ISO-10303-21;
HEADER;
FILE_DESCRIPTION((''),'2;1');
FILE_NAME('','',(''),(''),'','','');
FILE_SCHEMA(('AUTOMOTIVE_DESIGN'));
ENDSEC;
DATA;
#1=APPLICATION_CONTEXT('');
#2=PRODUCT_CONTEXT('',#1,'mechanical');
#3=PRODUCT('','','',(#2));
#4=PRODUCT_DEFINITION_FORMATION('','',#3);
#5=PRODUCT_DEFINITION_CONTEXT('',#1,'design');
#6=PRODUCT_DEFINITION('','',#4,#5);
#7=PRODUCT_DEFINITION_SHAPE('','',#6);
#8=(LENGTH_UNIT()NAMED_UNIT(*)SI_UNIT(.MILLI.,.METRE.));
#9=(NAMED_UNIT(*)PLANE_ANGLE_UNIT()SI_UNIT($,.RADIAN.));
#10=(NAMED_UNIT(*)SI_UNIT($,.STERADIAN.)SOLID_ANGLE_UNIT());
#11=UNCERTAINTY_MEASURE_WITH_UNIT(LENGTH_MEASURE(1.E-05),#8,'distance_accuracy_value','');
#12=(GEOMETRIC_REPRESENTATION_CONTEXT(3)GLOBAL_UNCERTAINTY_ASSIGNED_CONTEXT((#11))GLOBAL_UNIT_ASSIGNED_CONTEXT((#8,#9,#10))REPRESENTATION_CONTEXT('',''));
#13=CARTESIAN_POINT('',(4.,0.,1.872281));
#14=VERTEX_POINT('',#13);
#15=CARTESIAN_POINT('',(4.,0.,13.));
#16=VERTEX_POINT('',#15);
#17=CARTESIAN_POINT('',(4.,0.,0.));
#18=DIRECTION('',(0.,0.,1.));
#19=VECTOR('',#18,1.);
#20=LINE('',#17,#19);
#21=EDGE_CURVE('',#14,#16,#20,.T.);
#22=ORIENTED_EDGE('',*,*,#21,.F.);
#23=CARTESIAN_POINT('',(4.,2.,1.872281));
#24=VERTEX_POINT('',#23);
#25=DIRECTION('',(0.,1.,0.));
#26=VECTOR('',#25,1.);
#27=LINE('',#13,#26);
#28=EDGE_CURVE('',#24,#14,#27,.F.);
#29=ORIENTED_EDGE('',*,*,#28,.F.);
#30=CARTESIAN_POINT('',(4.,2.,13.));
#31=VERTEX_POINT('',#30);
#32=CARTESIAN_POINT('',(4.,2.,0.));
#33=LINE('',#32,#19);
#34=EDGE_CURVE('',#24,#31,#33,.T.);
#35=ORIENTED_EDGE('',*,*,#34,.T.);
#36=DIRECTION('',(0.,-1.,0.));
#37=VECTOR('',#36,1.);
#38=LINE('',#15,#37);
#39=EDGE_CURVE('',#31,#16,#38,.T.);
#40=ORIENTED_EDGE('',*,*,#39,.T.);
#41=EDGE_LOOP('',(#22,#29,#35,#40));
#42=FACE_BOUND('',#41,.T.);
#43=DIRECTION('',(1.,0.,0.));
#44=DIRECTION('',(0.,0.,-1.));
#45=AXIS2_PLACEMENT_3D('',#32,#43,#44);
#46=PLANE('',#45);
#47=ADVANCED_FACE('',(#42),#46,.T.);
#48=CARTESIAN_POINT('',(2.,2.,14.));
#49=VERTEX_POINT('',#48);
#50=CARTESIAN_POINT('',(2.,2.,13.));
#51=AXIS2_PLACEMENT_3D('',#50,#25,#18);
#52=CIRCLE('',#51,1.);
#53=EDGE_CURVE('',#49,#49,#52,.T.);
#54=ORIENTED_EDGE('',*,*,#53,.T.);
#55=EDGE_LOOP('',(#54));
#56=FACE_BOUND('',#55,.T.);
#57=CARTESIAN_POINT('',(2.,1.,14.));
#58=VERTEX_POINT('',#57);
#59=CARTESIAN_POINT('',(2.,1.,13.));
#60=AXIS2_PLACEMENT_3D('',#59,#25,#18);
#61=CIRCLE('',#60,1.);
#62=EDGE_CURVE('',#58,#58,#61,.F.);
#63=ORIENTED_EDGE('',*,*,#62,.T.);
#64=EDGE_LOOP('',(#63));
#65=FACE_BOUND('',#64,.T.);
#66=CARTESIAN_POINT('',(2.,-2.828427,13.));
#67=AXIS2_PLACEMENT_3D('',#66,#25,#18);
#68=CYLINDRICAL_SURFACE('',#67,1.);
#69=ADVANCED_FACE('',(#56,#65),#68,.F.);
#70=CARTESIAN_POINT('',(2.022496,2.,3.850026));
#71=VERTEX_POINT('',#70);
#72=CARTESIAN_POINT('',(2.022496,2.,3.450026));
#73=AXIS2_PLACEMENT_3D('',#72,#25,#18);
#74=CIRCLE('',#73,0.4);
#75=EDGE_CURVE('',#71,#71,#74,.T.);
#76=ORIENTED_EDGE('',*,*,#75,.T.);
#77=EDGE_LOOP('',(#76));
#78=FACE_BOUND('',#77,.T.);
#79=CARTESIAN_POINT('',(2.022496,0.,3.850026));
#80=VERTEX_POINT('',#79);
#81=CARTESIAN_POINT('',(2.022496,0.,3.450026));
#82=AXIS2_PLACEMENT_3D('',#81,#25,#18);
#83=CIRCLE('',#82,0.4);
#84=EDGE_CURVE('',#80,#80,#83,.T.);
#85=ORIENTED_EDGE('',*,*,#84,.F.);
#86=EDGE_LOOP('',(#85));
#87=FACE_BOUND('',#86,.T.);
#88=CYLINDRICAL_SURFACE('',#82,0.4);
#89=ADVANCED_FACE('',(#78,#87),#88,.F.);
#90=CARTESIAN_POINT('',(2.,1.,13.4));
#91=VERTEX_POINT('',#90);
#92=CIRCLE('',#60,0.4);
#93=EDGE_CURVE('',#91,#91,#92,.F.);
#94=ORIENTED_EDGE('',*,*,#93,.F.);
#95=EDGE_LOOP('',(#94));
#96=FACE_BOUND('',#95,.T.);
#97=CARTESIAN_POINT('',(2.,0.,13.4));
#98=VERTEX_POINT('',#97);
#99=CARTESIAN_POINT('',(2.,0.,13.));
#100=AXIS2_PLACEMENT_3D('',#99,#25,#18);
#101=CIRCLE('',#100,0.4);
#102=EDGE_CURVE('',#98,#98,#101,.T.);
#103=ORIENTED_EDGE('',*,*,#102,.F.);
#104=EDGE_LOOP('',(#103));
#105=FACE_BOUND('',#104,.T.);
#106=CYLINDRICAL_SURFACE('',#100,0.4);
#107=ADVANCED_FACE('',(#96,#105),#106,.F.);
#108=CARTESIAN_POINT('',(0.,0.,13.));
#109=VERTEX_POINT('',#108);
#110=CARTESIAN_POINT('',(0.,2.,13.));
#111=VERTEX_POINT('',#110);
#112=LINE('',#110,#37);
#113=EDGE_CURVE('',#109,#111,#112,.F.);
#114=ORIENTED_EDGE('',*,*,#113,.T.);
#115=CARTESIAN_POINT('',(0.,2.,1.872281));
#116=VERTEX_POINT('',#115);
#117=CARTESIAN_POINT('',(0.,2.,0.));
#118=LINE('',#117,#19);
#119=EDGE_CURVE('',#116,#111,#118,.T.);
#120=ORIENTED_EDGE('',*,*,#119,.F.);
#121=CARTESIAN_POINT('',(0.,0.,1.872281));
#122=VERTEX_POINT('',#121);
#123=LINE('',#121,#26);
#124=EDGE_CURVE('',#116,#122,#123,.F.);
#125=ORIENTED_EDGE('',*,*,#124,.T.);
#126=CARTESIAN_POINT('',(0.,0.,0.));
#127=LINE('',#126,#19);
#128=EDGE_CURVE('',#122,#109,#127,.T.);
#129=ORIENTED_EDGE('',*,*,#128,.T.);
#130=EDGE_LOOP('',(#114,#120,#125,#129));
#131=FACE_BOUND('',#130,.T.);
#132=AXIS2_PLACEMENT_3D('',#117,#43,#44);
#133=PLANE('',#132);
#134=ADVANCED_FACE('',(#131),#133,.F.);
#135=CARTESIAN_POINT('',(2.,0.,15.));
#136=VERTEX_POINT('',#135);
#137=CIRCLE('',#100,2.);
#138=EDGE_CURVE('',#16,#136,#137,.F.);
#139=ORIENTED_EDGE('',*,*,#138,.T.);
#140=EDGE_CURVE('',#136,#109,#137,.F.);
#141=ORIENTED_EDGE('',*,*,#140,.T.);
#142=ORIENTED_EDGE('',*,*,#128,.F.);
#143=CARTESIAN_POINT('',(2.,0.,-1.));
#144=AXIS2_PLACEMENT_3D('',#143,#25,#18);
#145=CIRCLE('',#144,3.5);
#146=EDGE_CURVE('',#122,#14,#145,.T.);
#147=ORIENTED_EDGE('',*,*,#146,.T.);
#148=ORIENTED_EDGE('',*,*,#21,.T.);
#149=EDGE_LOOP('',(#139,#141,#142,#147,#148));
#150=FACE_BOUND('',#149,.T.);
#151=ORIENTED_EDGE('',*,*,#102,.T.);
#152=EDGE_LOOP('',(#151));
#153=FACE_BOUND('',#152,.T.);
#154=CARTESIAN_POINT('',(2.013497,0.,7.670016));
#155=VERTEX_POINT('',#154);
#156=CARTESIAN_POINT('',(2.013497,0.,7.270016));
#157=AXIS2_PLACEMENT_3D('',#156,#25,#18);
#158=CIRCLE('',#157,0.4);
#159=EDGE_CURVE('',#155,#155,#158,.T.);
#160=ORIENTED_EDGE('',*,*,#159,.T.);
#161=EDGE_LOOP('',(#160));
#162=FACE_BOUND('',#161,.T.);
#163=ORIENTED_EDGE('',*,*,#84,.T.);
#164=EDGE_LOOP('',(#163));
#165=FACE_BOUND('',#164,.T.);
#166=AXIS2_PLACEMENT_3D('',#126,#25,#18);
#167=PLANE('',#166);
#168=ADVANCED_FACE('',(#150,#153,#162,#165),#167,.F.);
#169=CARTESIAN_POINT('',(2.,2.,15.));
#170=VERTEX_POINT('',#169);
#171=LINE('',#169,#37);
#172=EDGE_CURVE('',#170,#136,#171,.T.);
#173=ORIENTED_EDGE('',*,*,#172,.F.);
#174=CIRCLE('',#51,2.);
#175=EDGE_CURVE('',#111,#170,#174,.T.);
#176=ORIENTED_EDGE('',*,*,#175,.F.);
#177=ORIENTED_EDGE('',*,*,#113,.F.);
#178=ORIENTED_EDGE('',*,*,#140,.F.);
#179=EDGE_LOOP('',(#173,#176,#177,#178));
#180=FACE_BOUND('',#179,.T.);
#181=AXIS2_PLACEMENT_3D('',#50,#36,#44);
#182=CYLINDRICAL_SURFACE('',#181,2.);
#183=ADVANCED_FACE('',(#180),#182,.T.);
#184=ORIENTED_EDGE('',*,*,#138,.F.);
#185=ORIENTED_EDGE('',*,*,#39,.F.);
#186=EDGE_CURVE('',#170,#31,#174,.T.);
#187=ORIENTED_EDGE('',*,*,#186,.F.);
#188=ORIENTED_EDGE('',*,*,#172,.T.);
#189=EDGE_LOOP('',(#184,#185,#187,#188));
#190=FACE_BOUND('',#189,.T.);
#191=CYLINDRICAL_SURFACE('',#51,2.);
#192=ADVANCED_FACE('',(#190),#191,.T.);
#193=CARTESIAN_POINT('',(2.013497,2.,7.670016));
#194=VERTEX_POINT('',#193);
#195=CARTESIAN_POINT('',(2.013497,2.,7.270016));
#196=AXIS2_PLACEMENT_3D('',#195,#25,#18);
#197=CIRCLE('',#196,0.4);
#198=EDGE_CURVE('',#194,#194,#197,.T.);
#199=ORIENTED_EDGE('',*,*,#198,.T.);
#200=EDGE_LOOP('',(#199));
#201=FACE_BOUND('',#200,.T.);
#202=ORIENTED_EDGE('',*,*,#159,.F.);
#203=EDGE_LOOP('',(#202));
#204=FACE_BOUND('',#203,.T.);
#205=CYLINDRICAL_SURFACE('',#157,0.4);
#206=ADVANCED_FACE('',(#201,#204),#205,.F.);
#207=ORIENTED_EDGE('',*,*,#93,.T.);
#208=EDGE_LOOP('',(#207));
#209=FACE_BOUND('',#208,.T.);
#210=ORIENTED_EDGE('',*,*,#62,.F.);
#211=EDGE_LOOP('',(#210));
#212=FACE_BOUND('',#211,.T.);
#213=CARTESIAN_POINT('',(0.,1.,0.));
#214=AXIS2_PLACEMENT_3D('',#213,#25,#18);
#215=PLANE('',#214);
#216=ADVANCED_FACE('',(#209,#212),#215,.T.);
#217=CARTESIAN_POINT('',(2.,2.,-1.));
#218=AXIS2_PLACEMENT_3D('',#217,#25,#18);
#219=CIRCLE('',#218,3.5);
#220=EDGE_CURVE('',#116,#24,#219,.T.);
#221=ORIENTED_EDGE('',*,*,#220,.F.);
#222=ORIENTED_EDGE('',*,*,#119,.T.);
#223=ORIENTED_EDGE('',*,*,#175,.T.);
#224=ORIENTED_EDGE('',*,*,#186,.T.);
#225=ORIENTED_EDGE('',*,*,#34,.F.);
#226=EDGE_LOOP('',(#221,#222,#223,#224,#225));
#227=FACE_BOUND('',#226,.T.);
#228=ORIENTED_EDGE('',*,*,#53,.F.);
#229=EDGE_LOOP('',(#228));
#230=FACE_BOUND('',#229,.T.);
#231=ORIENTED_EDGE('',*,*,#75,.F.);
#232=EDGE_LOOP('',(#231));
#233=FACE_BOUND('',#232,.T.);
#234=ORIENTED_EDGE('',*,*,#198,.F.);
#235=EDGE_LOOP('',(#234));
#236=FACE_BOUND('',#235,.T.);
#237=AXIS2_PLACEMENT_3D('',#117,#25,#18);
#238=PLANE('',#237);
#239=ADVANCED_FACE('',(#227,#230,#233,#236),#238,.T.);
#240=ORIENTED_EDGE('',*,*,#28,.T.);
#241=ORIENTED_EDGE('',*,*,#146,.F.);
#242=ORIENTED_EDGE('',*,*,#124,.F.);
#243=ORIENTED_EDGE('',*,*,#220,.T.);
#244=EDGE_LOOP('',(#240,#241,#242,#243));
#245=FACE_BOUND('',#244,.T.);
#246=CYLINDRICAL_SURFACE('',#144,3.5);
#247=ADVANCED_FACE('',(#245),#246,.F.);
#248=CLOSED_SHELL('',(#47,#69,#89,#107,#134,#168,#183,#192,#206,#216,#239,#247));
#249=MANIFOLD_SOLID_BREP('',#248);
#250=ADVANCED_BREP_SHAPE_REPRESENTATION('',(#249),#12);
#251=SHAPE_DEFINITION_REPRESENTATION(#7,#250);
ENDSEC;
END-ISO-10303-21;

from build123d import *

# Parameters (mm, degrees)
SKETCH_1_W          = 4
SKETCH_1_H          = 15
EXTRUDE_1_DEPTH     = 2
SKETCH_3_R          = 0.4
CUT_EXTRUDE_1_DEPTH = 16.652475842
SKETCH_3_3_R        = 1
CUT_EXTRUDE_2_DEPTH = 1
SKETCH_4_R          = 3.5
CUT_EXTRUDE_3_DEPTH = 16.652475842
FILLET_1_R          = 2


with BuildPart() as part:
    # 草图1 → 凸台-拉伸1 (new body)
    with BuildSketch(Plane(origin=(0, 0, 0), x_dir=(1, 0, 0), z_dir=(0, 1, 0))):
        with Locations((2, -7.5)):
            Rectangle(SKETCH_1_W, SKETCH_1_H)
    extrude(amount=EXTRUDE_1_DEPTH)

    # 草图3 → 切除-拉伸1 (cut, through all)
    with BuildSketch(Plane(origin=(0, 2, 0), x_dir=(1, 0, 0), z_dir=(0, 1, 0))):
        with Locations(Location((2, -13, 0), (0, 0, 270))):
            Circle(SKETCH_3_R)
        with Locations(Location((2.022495613, -3.450026495, 0), (0, 0, 270))):
            Circle(SKETCH_3_R)
        with Locations(Location((2.013497368, -7.270015897, 0), (0, 0, 270))):
            Circle(SKETCH_3_R)
    extrude(amount=-CUT_EXTRUDE_1_DEPTH, mode=Mode.SUBTRACT)

    # 草图3<3> → 切除-拉伸2 (cut)
    with BuildSketch(Plane(origin=(0, 2, 0), x_dir=(1, 0, 0), z_dir=(0, 1, 0))):
        with Locations(Location((2, -13, 0), (0, 0, 270))):
            Circle(SKETCH_3_3_R)
    extrude(amount=-CUT_EXTRUDE_2_DEPTH, mode=Mode.SUBTRACT)

    # 草图4 → 切除-拉伸3 (cut, through all)
    with BuildSketch(Plane(origin=(0, 2, 0), x_dir=(1, 0, 0), z_dir=(0, 1, 0))):
        with Locations((2, 1)):
            Circle(SKETCH_4_R)
    extrude(amount=-CUT_EXTRUDE_3_DEPTH, mode=Mode.SUBTRACT)

    # 圆角1
    fillet_1_edges = [part.edges().sort_by_distance(p)[0] for p in [
        (4, 1, 15),
        (0, 1, 15),
    ]]
    fillet(fillet_1_edges, radius=FILLET_1_R - 0.0001)  # a hair under: the kernel refuses the full size


solid = part.part
